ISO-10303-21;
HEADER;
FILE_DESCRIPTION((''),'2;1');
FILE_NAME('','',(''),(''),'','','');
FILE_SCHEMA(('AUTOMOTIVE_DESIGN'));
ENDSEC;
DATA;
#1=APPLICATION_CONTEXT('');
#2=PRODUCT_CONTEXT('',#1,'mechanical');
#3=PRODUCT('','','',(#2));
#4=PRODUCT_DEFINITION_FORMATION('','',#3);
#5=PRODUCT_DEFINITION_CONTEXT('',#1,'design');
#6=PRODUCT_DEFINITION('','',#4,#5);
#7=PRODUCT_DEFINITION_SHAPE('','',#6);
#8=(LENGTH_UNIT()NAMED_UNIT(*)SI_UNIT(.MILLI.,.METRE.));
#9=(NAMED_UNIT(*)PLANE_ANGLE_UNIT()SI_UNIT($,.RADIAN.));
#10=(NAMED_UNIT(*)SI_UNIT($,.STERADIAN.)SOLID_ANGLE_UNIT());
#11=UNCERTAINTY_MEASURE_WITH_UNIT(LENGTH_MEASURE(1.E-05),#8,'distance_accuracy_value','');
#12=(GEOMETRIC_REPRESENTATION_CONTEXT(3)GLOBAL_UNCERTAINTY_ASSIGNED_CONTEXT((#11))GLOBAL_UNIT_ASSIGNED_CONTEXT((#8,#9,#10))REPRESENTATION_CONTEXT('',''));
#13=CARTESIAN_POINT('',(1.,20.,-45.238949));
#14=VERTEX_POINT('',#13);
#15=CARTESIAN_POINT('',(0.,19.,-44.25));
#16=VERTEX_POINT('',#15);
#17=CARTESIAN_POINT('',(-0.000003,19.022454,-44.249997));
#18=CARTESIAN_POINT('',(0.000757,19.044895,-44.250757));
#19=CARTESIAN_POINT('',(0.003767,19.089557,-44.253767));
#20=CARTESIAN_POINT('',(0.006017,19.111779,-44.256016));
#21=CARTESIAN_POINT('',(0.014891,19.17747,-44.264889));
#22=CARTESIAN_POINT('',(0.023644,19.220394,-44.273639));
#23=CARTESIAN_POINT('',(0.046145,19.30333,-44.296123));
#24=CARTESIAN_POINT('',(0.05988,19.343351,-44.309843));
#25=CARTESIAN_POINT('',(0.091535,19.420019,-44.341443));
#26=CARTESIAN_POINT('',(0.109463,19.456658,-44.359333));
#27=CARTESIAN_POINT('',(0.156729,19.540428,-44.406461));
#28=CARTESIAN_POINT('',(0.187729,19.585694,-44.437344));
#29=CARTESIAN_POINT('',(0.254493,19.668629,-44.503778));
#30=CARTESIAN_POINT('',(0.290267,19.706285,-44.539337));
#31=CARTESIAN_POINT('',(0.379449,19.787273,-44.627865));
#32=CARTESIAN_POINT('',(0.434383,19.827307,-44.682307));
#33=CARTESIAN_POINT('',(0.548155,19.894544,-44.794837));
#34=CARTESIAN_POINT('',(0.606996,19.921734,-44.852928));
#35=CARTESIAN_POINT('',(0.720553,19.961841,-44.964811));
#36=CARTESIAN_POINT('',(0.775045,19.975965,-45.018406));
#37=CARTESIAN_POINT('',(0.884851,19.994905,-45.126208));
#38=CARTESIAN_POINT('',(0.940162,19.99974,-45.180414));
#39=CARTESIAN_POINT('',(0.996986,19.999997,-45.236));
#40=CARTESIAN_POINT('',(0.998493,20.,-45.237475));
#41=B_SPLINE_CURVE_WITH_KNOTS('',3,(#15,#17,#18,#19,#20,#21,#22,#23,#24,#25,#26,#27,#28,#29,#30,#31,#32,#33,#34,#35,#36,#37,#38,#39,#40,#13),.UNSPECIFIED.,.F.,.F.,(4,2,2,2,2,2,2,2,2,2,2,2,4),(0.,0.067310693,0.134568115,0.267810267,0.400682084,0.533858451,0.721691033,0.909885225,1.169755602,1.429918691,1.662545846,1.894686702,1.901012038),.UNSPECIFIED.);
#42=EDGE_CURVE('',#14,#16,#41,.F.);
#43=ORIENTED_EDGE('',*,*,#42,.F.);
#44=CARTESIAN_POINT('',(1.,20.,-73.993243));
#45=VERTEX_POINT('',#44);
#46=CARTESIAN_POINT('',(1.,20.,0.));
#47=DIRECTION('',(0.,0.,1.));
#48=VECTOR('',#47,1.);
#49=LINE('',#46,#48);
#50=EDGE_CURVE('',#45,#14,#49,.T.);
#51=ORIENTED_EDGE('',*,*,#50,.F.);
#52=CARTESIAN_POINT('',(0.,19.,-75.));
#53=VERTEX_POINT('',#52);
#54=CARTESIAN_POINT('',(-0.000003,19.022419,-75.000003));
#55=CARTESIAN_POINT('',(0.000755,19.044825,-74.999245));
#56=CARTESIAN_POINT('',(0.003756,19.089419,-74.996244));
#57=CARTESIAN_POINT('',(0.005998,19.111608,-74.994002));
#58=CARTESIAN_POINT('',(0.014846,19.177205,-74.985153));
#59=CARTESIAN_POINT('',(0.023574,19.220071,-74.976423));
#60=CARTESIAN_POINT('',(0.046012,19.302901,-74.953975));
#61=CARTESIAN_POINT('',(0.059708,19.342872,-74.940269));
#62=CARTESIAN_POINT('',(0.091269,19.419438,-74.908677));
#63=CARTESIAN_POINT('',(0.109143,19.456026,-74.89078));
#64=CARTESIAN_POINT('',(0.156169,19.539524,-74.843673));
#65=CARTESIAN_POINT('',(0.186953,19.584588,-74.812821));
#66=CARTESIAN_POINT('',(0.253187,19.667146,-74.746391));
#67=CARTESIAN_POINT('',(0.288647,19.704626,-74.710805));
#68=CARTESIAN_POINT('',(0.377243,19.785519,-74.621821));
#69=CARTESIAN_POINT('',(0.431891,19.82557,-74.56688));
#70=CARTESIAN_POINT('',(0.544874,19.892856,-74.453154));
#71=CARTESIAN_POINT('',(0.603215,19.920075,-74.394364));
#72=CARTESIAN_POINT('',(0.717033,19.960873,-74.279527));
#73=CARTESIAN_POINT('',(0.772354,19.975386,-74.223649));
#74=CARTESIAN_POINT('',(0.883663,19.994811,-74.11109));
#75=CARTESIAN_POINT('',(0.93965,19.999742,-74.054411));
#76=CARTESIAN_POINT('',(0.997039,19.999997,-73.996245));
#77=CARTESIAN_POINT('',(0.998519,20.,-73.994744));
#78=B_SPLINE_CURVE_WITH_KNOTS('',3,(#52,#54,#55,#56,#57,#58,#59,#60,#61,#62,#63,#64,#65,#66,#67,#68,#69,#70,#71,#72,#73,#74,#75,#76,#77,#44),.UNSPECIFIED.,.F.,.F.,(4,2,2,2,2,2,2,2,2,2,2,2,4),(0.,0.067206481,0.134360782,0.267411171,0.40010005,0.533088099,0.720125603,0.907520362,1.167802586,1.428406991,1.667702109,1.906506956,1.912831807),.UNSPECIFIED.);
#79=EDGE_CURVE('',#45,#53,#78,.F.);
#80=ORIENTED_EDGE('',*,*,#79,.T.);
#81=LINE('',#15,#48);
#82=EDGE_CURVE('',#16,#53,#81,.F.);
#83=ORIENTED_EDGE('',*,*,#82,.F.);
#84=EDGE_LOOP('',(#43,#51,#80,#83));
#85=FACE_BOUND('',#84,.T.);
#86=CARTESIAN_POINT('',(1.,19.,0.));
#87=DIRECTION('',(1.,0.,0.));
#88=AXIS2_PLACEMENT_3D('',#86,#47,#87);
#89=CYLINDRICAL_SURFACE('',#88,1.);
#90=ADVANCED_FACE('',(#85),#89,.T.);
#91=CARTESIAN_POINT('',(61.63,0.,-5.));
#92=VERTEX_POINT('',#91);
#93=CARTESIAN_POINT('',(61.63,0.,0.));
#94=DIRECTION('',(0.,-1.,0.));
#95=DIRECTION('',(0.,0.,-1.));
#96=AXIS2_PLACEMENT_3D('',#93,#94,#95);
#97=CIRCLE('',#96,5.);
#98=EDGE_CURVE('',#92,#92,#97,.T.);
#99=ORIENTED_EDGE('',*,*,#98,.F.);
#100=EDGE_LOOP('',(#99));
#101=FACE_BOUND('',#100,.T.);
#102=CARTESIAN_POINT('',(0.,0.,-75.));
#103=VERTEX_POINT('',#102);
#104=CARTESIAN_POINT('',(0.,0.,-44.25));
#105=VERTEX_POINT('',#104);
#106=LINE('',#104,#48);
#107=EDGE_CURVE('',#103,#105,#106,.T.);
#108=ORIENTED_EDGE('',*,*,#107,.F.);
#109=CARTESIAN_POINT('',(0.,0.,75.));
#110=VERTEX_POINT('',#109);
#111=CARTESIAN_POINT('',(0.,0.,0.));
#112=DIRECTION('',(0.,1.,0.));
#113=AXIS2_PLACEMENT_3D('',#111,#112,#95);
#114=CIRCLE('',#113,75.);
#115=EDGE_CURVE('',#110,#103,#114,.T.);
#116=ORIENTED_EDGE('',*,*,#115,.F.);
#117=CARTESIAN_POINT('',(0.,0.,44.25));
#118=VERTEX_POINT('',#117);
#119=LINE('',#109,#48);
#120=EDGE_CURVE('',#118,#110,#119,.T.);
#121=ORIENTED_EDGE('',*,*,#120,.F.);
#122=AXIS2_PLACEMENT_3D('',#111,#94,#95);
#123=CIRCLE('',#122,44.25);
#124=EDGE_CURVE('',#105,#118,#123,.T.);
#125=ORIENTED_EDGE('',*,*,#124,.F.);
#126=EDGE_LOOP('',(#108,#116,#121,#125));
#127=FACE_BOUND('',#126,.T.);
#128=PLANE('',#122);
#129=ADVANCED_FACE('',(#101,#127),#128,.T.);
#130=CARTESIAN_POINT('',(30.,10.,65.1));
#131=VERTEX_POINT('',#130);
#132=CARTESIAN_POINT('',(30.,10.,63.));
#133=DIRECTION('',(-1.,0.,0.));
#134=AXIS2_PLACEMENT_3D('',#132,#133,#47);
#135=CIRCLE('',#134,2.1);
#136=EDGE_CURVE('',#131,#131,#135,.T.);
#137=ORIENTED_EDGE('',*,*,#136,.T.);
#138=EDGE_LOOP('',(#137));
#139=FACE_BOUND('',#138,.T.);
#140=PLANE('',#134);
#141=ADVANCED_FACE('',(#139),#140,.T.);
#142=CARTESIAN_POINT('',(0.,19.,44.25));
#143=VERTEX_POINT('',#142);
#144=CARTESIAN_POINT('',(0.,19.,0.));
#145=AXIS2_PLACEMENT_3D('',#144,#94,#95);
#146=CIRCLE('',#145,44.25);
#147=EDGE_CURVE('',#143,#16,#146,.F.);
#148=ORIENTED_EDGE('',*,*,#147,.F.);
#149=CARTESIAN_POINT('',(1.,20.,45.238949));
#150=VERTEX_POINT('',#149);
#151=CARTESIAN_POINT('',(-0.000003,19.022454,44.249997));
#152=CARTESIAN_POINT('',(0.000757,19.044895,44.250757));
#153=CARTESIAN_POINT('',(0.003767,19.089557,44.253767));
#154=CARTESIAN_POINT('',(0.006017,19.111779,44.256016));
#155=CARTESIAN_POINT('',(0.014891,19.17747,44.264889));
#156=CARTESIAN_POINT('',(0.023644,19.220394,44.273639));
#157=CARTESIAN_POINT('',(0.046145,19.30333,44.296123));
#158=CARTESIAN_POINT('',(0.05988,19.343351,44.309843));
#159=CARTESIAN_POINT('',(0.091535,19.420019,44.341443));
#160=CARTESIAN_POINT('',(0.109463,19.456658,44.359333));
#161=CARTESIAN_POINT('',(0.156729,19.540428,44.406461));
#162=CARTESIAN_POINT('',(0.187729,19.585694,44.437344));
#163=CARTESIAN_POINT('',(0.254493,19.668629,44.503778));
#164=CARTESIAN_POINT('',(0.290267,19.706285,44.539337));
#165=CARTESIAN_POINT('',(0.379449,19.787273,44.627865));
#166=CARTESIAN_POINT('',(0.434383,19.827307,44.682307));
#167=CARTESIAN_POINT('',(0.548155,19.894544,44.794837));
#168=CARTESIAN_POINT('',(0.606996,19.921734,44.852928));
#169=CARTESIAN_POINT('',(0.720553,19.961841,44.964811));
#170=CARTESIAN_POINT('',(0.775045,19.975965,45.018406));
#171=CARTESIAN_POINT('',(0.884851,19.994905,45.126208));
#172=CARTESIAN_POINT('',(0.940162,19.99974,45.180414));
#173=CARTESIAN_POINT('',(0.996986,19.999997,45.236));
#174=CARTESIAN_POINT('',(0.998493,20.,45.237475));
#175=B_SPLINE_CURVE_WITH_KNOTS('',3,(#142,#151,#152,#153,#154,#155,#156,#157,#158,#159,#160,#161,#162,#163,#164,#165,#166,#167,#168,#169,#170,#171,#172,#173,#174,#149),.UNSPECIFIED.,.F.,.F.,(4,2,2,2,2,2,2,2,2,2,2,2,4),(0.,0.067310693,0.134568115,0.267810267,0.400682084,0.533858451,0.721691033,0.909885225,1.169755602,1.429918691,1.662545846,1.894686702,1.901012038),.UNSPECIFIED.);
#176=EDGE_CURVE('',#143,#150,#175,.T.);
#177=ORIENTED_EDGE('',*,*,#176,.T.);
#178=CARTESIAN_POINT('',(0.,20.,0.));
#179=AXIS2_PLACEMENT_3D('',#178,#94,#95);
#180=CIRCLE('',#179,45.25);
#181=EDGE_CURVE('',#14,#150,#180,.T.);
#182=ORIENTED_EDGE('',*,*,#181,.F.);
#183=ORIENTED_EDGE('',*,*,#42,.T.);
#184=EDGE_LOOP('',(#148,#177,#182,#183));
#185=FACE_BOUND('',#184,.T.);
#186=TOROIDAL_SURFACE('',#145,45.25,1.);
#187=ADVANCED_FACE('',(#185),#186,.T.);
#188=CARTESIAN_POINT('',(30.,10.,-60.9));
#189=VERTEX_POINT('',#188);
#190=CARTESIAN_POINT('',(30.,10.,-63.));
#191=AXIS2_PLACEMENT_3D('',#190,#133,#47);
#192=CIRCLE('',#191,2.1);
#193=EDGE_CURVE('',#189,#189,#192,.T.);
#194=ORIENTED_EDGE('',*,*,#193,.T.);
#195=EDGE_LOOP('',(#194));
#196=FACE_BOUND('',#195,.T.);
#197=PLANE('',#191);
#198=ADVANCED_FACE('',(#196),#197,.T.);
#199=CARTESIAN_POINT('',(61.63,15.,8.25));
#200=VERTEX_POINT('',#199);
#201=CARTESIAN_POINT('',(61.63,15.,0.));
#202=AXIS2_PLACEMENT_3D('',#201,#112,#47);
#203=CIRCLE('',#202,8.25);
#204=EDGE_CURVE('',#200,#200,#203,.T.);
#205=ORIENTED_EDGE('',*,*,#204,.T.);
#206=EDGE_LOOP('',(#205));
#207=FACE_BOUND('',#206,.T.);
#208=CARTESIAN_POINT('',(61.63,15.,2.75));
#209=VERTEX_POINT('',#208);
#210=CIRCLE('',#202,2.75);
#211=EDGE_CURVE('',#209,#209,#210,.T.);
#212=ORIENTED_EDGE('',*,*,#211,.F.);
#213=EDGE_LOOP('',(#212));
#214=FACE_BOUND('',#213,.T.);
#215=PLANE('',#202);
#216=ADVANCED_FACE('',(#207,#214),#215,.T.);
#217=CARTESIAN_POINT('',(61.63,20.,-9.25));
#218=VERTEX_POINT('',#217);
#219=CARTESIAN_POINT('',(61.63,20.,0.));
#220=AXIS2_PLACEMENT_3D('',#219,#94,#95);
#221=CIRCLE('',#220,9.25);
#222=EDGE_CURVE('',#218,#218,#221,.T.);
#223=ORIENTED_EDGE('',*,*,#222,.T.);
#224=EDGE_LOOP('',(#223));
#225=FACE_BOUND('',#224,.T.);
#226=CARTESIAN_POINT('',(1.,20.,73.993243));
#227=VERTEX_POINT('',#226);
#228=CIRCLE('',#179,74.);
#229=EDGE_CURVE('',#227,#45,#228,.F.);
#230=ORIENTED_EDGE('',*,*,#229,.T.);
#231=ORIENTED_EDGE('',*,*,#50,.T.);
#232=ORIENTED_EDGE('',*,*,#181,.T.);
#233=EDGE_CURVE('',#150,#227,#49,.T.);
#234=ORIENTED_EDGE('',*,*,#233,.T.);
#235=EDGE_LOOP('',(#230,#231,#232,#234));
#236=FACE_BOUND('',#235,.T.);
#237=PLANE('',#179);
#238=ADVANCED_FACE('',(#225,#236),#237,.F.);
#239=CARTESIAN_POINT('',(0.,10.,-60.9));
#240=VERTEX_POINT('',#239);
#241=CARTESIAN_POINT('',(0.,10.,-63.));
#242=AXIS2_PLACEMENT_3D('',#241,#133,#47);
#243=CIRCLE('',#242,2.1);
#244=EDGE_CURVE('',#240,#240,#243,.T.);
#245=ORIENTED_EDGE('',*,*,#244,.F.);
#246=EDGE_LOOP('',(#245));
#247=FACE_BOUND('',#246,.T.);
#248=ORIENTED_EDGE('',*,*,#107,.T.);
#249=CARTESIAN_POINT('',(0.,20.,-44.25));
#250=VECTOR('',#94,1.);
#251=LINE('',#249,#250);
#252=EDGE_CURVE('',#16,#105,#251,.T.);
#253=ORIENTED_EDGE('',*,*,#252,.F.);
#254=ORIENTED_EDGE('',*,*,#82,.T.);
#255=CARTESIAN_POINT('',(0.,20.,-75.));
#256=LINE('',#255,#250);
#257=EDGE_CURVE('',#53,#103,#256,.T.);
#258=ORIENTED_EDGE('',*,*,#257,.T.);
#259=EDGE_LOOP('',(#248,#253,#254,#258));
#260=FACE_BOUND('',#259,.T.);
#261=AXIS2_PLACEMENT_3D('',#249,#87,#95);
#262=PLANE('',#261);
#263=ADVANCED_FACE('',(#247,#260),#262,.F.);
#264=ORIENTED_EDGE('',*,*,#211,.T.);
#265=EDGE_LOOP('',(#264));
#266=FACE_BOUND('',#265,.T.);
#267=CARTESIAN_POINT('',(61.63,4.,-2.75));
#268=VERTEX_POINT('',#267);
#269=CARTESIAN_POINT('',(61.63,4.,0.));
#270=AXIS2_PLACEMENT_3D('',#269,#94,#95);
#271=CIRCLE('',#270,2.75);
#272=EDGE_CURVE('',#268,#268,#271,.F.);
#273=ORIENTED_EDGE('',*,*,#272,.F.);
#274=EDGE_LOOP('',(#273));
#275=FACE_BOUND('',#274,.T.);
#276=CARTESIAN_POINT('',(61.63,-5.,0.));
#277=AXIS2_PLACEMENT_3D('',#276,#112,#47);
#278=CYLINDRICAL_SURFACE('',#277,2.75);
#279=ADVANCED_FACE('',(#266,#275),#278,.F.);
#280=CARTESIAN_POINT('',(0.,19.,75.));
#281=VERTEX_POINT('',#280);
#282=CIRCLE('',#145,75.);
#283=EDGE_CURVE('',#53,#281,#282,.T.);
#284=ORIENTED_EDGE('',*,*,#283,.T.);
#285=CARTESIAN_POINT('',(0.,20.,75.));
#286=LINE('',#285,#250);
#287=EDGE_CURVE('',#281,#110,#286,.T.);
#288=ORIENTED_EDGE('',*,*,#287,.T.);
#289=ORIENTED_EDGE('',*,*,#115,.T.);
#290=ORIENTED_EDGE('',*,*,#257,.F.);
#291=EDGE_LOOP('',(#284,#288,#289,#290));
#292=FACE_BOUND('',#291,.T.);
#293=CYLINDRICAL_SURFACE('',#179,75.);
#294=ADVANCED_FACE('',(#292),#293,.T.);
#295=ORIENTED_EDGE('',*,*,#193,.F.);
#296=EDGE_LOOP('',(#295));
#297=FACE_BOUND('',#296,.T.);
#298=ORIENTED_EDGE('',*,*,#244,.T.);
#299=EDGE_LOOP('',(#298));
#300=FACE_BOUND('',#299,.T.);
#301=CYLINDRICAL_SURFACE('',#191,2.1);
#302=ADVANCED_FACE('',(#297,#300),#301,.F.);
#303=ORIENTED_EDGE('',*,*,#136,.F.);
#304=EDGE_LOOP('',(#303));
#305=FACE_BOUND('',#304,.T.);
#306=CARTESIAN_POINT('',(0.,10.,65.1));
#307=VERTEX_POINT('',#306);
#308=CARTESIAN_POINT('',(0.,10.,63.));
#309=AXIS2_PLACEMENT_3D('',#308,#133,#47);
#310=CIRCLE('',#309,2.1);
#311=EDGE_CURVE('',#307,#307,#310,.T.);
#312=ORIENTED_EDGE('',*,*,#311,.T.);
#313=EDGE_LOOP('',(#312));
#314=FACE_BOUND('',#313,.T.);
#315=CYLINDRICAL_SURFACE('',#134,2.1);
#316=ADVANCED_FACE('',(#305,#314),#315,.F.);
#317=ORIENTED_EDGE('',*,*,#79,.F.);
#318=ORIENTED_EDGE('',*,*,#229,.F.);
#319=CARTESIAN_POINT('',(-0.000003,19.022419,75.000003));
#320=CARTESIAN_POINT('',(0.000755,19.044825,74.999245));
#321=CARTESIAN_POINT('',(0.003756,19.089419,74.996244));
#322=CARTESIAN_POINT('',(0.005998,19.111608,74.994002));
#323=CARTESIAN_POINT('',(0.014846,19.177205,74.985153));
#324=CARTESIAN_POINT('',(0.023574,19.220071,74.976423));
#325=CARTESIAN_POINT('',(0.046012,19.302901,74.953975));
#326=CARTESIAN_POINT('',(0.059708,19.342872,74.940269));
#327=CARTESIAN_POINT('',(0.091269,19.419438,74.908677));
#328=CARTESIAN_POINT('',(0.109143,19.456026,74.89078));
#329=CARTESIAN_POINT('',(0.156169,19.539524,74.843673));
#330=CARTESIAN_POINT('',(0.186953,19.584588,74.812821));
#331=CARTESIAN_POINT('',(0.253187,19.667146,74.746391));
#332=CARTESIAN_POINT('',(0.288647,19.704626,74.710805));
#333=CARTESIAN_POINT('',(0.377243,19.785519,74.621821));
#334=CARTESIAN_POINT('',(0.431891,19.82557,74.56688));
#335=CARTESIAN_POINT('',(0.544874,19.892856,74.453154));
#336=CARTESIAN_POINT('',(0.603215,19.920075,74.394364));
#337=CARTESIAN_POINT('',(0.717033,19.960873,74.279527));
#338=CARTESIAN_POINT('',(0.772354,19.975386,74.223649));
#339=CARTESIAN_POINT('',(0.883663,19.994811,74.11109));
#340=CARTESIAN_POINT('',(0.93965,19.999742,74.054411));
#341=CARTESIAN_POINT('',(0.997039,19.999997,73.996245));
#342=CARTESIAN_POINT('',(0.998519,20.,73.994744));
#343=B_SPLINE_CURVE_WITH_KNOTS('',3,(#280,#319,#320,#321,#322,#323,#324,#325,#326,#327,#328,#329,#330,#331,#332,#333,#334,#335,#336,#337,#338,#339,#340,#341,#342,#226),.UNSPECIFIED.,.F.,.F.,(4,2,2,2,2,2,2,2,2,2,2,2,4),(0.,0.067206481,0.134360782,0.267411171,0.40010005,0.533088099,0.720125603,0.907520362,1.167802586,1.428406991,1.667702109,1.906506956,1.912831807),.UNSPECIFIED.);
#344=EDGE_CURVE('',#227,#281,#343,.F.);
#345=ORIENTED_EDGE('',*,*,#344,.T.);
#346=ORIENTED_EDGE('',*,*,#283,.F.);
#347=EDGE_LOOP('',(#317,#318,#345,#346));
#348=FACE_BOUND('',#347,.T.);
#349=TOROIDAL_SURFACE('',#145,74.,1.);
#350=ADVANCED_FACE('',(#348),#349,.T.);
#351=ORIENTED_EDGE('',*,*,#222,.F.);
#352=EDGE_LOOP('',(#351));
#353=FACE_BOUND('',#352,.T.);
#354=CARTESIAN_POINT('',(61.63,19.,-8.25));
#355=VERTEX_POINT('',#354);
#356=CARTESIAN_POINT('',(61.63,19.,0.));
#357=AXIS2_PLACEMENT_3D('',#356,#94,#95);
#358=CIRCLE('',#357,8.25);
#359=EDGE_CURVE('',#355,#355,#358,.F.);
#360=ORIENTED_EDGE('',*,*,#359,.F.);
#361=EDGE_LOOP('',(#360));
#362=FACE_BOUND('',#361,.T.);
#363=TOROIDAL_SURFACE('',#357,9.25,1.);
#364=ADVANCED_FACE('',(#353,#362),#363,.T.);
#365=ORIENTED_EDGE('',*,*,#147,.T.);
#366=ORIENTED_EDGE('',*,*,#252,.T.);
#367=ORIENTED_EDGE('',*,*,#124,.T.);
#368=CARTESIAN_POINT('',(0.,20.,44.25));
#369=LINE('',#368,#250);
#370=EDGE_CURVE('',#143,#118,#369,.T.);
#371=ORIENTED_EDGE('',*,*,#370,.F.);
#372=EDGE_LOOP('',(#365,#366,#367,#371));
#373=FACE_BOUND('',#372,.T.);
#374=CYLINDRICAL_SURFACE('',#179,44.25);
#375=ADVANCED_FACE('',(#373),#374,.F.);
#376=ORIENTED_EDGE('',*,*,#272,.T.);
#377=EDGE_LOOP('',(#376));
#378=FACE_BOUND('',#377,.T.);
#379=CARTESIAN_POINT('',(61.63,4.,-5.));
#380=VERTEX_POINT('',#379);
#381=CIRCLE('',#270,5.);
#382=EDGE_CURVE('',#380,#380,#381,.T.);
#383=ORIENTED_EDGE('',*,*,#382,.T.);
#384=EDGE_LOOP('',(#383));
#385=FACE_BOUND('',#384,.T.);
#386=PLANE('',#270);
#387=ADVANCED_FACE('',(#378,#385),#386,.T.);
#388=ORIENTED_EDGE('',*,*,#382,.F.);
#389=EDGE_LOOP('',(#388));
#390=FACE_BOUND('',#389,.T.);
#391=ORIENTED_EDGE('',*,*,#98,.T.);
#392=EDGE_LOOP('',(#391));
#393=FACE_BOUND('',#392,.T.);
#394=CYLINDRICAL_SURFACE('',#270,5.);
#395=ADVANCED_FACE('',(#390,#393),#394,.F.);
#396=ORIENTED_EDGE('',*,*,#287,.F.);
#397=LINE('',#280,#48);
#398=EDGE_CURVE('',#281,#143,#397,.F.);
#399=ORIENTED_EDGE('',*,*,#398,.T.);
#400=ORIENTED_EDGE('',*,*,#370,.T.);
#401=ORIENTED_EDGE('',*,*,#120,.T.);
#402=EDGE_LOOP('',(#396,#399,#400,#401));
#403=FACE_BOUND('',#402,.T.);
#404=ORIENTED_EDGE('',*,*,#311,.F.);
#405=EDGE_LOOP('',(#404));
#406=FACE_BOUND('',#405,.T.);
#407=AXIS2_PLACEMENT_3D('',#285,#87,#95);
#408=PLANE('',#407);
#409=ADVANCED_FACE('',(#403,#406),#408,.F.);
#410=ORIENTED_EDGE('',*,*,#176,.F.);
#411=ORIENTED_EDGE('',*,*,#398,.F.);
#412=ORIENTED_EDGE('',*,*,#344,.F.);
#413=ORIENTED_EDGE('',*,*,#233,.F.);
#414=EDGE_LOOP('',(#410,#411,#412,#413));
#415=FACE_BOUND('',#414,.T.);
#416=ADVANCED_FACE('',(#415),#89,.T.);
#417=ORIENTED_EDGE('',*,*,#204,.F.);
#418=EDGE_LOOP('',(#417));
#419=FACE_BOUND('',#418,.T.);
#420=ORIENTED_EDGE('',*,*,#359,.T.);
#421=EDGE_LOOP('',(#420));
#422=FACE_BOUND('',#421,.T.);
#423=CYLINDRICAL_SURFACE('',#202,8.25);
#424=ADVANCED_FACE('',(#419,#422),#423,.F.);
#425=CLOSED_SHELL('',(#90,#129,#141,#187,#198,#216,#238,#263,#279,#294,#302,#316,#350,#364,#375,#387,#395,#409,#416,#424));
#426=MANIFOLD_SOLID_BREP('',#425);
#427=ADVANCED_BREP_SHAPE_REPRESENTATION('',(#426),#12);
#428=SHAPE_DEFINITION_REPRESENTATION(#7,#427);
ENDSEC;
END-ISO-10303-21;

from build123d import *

# Parameters (mm, degrees)
BOSS_EXTRUDE1_DEPTH = 20
SKETCH3_R           = 2.1
CUT_EXTRUDE2_DEPTH  = 30
SKETCH4_R           = 8.25
CUT_EXTRUDE3_DEPTH  = 5
FILLET1_R           = 1
FILLET2_R           = 1
FILLET3_R           = 1
SKETCH5_R           = 2.75
CUT_EXTRUDE4_DEPTH  = 20
SKETCH6_R           = 5
CUT_EXTRUDE5_DEPTH  = 4


with BuildPart() as part:
    # Sketch1 → Boss-Extrude1 (new body)
    with BuildSketch(Plane(origin=(0, 0, 0), x_dir=(1, 0, 0), z_dir=(0, 1, 0))):
        with BuildLine():
            Line((0, 44.25), (0, 75))
            ThreePointArc((0, 75), (75, 0), (0, -75))
            Line((0, -75), (0, -44.25))
            ThreePointArc((0, -44.25), (44.25, 0), (0, 44.25))
        make_face()
    extrude(amount=BOSS_EXTRUDE1_DEPTH)

    # Sketch3 → Cut-Extrude2 (cut)
    with BuildSketch(Plane.ZY):
        with Locations((-63, 10)):
            Circle(SKETCH3_R)
        with Locations((63, 10)):
            Circle(SKETCH3_R)
    extrude(amount=-CUT_EXTRUDE2_DEPTH, mode=Mode.SUBTRACT)

    # Sketch4 → Cut-Extrude3 (cut)
    with BuildSketch(Plane(origin=(0, 20, 0), x_dir=(1, 0, 0), z_dir=(0, 1, 0))):
        with Locations(Location((61.63, 0, 0), (0, 0, 270))):
            Circle(SKETCH4_R)
    extrude(amount=-CUT_EXTRUDE3_DEPTH, mode=Mode.SUBTRACT)

    # Fillet1
    fillet1_edges = [part.edges().sort_by_distance(p)[0] for p in [
        (61.63, 20, -8.25),
    ]]
    fillet(fillet1_edges, radius=FILLET1_R)

    # Fillet2
    fillet2_edges = [part.edges().sort_by_distance(p)[0] for p in [
        (44.25, 20, 0),
    ]]
    fillet(fillet2_edges, radius=FILLET2_R)

    # Fillet3
    # the kernel refuses this fillet: 1 mm, written as the material it takes off along each edge
    with BuildSketch(Plane(origin=(0, 20, -42.75), x_dir=(1, 0, 0), z_dir=(0, 0, -1)), Plane(origin=(0, 20, 77.5), x_dir=(1, 0, 0), z_dir=(0, 0, -1))) as fillet3_piece_1:
        with BuildLine():
            CenterArc((FILLET3_R, FILLET3_R), FILLET3_R, 180, 90)
            Line((0, FILLET3_R), (0, 0))
            Line((0, 0), (FILLET3_R, 0))
        make_face()
    extrude(amount=34.75, mode=Mode.SUBTRACT)
    with BuildSketch(Plane(origin=(0, 20, 0), x_dir=(-0.033380737313120155, 0, -0.9994427079009744), z_dir=(-0.9994427079009744, 0, 0.033380737313120155))) as fillet3_piece_2:
        with BuildLine():
            CenterArc((75 - FILLET3_R, FILLET3_R), FILLET3_R, 270, 90)
            Line((75, FILLET3_R), (75, 0))
            Line((75, 0), (75 - FILLET3_R, 0))
        make_face()
    revolve(axis=Axis((0, 20, 0), (0, -1, 0)), revolution_arc=183.825861464, mode=Mode.SUBTRACT)

    # Sketch5 → Cut-Extrude4 (cut)
    with BuildSketch(Plane(origin=(0, 15, 0), x_dir=(1, 0, 0), z_dir=(0, 1, 0))):
        with Locations(Location((61.63, 0, 0), (0, 0, 270))):
            Circle(SKETCH5_R)
    extrude(amount=-CUT_EXTRUDE4_DEPTH, mode=Mode.SUBTRACT)

    # Sketch6 → Cut-Extrude5 (cut)
    with BuildSketch(Plane.XZ):
        with Locations(Location((61.63, 0, 0), (0, 0, 270))):
            Circle(SKETCH6_R)
    extrude(amount=-CUT_EXTRUDE5_DEPTH, mode=Mode.SUBTRACT)


solid = part.part
